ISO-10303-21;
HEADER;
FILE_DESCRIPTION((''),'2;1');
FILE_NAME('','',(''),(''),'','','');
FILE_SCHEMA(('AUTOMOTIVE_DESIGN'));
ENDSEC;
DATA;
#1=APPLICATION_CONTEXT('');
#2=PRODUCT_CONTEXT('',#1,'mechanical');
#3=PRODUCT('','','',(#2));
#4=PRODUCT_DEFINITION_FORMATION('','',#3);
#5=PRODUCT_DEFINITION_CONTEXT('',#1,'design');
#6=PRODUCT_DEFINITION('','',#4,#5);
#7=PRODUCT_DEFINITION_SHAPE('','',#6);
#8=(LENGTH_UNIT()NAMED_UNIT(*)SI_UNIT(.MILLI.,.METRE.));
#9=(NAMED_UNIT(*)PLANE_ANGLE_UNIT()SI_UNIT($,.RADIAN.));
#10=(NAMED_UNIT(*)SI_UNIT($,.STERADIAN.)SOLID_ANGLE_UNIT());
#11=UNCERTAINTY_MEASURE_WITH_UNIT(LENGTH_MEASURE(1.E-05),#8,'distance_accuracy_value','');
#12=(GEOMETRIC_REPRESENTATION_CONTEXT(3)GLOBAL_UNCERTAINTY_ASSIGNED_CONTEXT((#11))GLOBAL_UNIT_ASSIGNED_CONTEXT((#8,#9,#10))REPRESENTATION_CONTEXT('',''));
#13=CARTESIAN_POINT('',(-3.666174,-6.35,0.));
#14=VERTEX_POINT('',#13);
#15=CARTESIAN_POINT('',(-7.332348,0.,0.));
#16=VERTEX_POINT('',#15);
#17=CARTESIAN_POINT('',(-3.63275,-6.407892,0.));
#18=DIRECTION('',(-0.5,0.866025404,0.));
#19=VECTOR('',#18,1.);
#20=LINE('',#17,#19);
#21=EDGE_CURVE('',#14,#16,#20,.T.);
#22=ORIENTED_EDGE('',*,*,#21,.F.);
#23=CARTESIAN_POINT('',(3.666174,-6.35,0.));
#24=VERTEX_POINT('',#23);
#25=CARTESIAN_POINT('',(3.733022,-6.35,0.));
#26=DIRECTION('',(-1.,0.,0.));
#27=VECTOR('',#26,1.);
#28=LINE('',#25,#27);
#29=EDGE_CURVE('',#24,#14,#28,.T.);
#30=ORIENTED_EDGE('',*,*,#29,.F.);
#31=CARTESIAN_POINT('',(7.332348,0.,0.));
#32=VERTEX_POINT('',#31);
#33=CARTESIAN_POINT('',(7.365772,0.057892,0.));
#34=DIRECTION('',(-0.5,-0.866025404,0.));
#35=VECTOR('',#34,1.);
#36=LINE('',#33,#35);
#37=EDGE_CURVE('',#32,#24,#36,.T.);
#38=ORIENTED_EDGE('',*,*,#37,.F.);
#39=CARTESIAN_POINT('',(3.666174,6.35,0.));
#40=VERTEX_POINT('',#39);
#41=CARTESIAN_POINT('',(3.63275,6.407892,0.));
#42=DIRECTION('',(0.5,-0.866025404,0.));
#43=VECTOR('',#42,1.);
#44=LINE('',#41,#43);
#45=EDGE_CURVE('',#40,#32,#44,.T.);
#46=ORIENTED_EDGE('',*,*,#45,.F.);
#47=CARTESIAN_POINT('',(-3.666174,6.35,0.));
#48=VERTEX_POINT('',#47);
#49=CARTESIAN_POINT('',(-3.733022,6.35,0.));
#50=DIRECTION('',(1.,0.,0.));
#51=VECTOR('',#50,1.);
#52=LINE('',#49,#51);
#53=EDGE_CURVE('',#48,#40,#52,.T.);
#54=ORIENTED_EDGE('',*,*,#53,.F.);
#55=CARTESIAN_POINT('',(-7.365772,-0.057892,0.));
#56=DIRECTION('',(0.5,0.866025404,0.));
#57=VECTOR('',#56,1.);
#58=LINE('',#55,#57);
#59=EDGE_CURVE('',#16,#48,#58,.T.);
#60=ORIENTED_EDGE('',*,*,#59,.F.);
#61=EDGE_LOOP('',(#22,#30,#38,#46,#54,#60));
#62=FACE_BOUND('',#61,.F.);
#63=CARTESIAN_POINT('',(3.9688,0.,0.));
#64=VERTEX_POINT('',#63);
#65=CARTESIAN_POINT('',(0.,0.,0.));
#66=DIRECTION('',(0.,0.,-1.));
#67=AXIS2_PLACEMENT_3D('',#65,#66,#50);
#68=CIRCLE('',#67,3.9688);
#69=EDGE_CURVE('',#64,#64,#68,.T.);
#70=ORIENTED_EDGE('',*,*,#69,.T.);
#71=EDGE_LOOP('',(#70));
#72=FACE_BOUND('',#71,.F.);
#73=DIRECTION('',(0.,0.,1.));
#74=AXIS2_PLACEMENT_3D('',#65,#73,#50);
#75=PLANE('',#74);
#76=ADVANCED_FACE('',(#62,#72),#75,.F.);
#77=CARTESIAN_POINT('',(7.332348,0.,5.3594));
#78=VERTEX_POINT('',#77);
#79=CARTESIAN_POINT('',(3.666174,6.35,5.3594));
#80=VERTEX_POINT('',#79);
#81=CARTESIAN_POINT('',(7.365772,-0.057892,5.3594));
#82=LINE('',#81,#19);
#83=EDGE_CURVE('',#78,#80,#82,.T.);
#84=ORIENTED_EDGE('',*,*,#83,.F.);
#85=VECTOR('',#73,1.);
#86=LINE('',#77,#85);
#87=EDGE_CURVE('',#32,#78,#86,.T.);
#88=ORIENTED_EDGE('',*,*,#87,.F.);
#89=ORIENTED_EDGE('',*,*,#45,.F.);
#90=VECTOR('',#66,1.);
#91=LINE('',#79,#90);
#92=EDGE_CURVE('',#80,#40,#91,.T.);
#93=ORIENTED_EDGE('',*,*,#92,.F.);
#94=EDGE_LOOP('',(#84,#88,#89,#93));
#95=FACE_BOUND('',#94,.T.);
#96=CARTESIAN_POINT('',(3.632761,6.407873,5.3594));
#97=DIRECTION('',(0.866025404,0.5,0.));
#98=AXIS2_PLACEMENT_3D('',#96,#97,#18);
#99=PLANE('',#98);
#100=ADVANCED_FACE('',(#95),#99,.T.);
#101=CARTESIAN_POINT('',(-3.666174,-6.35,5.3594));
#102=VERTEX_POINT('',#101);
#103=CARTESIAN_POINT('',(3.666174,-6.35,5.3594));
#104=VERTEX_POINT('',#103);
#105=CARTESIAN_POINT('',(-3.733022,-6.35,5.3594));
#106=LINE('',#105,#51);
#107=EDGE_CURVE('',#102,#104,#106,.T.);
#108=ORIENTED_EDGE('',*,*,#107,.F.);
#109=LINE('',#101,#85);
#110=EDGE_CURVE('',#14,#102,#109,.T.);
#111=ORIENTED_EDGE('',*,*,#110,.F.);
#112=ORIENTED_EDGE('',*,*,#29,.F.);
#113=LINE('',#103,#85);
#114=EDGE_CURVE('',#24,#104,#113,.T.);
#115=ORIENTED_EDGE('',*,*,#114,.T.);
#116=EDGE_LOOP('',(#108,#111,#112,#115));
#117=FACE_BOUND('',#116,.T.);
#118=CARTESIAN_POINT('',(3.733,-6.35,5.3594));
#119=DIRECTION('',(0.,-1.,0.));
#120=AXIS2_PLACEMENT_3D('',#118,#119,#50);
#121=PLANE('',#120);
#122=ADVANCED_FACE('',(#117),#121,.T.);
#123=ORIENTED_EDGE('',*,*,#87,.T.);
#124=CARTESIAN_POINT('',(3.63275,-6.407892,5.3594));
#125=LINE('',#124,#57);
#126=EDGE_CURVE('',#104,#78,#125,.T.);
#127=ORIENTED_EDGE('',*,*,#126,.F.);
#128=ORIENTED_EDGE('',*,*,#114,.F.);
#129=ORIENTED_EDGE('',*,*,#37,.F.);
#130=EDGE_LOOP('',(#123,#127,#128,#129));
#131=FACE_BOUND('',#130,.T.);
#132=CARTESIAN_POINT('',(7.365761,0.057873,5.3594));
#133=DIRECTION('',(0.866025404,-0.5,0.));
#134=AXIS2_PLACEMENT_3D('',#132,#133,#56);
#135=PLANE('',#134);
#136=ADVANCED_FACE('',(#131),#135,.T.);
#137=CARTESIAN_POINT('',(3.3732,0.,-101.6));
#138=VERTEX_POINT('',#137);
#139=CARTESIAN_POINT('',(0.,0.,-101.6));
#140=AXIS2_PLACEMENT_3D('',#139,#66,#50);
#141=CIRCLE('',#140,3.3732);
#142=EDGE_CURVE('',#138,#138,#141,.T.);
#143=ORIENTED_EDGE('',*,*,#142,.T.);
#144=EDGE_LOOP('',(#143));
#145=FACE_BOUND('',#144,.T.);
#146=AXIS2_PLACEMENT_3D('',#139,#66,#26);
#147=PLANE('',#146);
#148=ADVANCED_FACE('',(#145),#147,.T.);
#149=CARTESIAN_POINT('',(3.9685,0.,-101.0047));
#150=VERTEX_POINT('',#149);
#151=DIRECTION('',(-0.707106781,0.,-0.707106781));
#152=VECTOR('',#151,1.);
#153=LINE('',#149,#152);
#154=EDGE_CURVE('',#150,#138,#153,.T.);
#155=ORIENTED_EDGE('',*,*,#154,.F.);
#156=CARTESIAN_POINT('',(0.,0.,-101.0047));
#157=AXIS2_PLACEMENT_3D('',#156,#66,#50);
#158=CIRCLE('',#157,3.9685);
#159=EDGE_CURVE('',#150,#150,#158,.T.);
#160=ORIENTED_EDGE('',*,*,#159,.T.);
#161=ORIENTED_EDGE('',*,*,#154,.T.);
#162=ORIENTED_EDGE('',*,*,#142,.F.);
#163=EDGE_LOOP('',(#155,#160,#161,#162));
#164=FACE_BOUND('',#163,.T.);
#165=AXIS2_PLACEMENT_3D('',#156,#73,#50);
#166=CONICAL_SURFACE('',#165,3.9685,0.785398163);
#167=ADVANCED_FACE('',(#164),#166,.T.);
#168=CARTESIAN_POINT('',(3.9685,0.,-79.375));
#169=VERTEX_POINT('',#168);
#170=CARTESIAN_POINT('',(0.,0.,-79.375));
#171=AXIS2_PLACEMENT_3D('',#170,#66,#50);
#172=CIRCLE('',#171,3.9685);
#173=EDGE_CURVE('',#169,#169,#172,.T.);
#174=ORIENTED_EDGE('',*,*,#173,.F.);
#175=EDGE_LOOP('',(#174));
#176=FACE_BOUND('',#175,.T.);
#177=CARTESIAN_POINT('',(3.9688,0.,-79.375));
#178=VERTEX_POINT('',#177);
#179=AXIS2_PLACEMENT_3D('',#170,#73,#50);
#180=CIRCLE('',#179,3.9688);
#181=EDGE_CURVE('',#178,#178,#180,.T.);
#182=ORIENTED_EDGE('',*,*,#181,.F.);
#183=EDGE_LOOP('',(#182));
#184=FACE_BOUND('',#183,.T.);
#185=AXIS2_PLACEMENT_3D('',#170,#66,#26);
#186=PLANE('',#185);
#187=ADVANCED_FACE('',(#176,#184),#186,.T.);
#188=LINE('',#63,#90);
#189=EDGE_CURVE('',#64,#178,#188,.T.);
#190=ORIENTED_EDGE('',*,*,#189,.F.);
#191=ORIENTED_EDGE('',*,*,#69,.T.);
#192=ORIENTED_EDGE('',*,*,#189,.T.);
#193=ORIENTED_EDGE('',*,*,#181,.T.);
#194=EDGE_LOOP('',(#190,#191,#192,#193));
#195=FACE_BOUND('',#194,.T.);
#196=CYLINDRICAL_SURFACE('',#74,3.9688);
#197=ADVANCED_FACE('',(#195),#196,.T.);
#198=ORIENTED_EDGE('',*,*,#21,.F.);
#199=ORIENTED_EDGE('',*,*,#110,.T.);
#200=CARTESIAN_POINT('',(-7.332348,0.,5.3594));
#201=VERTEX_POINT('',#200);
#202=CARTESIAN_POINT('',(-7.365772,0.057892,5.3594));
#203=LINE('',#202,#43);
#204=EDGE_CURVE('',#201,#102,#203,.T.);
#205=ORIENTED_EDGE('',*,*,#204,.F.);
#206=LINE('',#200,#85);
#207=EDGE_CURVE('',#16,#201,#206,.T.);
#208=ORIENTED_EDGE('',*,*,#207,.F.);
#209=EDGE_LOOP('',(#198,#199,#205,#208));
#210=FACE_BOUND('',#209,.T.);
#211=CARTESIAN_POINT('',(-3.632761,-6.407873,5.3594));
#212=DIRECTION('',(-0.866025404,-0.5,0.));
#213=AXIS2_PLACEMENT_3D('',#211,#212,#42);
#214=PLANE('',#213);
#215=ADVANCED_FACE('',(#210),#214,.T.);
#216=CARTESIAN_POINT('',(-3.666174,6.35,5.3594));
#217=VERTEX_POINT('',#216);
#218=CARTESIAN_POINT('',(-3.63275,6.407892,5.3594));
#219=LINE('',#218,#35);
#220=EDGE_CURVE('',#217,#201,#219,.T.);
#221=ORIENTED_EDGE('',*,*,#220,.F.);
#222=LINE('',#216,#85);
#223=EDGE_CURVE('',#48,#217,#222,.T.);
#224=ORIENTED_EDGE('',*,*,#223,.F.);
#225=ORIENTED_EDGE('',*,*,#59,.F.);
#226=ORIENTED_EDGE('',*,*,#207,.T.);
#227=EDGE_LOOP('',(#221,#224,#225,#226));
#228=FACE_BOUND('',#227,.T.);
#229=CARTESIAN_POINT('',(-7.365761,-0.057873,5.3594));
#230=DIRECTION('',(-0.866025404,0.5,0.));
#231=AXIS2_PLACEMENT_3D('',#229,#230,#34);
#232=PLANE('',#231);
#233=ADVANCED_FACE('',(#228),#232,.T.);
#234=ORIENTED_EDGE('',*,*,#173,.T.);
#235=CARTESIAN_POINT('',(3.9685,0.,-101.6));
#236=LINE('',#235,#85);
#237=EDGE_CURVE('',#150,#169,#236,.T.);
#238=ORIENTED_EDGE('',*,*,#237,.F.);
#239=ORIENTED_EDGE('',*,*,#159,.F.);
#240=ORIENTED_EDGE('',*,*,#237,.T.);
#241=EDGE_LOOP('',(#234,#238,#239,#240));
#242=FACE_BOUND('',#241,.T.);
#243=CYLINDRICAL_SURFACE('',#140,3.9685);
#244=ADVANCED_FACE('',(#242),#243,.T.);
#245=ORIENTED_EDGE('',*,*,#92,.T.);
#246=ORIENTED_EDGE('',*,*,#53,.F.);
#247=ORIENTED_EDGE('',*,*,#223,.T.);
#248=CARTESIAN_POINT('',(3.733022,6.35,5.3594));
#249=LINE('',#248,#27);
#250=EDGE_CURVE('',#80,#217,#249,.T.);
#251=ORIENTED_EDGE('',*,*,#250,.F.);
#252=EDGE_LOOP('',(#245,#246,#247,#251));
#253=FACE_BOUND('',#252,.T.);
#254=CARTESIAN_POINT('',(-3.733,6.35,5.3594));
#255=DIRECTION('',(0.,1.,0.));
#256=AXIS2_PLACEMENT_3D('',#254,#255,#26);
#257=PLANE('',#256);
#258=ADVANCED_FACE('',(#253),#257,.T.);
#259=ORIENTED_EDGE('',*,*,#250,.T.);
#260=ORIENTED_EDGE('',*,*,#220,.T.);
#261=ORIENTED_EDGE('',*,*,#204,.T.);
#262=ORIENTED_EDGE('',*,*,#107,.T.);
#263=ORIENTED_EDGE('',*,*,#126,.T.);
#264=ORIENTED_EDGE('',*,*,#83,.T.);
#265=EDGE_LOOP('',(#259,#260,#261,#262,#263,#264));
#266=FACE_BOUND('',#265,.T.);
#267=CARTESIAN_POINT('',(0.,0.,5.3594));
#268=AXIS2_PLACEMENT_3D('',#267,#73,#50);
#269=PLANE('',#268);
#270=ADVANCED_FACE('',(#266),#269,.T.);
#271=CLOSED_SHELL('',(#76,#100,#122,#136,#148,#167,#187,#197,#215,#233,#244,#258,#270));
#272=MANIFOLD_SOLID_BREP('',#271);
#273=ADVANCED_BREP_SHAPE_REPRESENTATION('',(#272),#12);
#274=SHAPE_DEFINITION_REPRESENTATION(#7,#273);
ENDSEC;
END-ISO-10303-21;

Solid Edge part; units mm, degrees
sketch "Sketch1" plane through (0, 0, 0) normal (0, 0, 1) x (1, 0, 0)
  circle A0 centre (0, 0) radius 7.366
  dimension "D1" = 14.732
extrude "Protrusion1" add sketch "Sketch1" along normal blind 5.3594
sketch "Sketch2" plane through (0, 0, 0) normal (0, 0, -1) x (1, 0, 0)
  circle A0 centre (0, 0) radius 3.9688
extrude "Protrusion2" add sketch "Sketch2" along normal blind 101.6
sketch "Sketch3" plane through (0, 0, -101.6) normal (0, 0, -1) x (1, 0, 0)
  circle A0 centre (0, 0) radius 3.9685
extrude "Cutout1" cut sketch "Sketch3" against normal blind 22.225 flip side to cut
chamfer "Chamfer_1" distance 0.5953 angle 45 1 edges at (-3.9685, 0, -101.6)
sketch "Sketch4" plane through (0, 0, 5.3594) normal (0, 0, 1) x (1, 0, 0)
  line L0 (-3.733, 6.35) -> (3.733, 6.35)
  dimension "D1" = 12.7
extrude "Cutout2" cut sketch "Sketch4" against normal up to next material side at (0, 6.4, 5.3594)
pattern_circular "Pattern1" count 6 over 360 about axis through (0, 0, 5.3594) along (0, 0, 1) of "Cutout2"
properties part number "117656"
